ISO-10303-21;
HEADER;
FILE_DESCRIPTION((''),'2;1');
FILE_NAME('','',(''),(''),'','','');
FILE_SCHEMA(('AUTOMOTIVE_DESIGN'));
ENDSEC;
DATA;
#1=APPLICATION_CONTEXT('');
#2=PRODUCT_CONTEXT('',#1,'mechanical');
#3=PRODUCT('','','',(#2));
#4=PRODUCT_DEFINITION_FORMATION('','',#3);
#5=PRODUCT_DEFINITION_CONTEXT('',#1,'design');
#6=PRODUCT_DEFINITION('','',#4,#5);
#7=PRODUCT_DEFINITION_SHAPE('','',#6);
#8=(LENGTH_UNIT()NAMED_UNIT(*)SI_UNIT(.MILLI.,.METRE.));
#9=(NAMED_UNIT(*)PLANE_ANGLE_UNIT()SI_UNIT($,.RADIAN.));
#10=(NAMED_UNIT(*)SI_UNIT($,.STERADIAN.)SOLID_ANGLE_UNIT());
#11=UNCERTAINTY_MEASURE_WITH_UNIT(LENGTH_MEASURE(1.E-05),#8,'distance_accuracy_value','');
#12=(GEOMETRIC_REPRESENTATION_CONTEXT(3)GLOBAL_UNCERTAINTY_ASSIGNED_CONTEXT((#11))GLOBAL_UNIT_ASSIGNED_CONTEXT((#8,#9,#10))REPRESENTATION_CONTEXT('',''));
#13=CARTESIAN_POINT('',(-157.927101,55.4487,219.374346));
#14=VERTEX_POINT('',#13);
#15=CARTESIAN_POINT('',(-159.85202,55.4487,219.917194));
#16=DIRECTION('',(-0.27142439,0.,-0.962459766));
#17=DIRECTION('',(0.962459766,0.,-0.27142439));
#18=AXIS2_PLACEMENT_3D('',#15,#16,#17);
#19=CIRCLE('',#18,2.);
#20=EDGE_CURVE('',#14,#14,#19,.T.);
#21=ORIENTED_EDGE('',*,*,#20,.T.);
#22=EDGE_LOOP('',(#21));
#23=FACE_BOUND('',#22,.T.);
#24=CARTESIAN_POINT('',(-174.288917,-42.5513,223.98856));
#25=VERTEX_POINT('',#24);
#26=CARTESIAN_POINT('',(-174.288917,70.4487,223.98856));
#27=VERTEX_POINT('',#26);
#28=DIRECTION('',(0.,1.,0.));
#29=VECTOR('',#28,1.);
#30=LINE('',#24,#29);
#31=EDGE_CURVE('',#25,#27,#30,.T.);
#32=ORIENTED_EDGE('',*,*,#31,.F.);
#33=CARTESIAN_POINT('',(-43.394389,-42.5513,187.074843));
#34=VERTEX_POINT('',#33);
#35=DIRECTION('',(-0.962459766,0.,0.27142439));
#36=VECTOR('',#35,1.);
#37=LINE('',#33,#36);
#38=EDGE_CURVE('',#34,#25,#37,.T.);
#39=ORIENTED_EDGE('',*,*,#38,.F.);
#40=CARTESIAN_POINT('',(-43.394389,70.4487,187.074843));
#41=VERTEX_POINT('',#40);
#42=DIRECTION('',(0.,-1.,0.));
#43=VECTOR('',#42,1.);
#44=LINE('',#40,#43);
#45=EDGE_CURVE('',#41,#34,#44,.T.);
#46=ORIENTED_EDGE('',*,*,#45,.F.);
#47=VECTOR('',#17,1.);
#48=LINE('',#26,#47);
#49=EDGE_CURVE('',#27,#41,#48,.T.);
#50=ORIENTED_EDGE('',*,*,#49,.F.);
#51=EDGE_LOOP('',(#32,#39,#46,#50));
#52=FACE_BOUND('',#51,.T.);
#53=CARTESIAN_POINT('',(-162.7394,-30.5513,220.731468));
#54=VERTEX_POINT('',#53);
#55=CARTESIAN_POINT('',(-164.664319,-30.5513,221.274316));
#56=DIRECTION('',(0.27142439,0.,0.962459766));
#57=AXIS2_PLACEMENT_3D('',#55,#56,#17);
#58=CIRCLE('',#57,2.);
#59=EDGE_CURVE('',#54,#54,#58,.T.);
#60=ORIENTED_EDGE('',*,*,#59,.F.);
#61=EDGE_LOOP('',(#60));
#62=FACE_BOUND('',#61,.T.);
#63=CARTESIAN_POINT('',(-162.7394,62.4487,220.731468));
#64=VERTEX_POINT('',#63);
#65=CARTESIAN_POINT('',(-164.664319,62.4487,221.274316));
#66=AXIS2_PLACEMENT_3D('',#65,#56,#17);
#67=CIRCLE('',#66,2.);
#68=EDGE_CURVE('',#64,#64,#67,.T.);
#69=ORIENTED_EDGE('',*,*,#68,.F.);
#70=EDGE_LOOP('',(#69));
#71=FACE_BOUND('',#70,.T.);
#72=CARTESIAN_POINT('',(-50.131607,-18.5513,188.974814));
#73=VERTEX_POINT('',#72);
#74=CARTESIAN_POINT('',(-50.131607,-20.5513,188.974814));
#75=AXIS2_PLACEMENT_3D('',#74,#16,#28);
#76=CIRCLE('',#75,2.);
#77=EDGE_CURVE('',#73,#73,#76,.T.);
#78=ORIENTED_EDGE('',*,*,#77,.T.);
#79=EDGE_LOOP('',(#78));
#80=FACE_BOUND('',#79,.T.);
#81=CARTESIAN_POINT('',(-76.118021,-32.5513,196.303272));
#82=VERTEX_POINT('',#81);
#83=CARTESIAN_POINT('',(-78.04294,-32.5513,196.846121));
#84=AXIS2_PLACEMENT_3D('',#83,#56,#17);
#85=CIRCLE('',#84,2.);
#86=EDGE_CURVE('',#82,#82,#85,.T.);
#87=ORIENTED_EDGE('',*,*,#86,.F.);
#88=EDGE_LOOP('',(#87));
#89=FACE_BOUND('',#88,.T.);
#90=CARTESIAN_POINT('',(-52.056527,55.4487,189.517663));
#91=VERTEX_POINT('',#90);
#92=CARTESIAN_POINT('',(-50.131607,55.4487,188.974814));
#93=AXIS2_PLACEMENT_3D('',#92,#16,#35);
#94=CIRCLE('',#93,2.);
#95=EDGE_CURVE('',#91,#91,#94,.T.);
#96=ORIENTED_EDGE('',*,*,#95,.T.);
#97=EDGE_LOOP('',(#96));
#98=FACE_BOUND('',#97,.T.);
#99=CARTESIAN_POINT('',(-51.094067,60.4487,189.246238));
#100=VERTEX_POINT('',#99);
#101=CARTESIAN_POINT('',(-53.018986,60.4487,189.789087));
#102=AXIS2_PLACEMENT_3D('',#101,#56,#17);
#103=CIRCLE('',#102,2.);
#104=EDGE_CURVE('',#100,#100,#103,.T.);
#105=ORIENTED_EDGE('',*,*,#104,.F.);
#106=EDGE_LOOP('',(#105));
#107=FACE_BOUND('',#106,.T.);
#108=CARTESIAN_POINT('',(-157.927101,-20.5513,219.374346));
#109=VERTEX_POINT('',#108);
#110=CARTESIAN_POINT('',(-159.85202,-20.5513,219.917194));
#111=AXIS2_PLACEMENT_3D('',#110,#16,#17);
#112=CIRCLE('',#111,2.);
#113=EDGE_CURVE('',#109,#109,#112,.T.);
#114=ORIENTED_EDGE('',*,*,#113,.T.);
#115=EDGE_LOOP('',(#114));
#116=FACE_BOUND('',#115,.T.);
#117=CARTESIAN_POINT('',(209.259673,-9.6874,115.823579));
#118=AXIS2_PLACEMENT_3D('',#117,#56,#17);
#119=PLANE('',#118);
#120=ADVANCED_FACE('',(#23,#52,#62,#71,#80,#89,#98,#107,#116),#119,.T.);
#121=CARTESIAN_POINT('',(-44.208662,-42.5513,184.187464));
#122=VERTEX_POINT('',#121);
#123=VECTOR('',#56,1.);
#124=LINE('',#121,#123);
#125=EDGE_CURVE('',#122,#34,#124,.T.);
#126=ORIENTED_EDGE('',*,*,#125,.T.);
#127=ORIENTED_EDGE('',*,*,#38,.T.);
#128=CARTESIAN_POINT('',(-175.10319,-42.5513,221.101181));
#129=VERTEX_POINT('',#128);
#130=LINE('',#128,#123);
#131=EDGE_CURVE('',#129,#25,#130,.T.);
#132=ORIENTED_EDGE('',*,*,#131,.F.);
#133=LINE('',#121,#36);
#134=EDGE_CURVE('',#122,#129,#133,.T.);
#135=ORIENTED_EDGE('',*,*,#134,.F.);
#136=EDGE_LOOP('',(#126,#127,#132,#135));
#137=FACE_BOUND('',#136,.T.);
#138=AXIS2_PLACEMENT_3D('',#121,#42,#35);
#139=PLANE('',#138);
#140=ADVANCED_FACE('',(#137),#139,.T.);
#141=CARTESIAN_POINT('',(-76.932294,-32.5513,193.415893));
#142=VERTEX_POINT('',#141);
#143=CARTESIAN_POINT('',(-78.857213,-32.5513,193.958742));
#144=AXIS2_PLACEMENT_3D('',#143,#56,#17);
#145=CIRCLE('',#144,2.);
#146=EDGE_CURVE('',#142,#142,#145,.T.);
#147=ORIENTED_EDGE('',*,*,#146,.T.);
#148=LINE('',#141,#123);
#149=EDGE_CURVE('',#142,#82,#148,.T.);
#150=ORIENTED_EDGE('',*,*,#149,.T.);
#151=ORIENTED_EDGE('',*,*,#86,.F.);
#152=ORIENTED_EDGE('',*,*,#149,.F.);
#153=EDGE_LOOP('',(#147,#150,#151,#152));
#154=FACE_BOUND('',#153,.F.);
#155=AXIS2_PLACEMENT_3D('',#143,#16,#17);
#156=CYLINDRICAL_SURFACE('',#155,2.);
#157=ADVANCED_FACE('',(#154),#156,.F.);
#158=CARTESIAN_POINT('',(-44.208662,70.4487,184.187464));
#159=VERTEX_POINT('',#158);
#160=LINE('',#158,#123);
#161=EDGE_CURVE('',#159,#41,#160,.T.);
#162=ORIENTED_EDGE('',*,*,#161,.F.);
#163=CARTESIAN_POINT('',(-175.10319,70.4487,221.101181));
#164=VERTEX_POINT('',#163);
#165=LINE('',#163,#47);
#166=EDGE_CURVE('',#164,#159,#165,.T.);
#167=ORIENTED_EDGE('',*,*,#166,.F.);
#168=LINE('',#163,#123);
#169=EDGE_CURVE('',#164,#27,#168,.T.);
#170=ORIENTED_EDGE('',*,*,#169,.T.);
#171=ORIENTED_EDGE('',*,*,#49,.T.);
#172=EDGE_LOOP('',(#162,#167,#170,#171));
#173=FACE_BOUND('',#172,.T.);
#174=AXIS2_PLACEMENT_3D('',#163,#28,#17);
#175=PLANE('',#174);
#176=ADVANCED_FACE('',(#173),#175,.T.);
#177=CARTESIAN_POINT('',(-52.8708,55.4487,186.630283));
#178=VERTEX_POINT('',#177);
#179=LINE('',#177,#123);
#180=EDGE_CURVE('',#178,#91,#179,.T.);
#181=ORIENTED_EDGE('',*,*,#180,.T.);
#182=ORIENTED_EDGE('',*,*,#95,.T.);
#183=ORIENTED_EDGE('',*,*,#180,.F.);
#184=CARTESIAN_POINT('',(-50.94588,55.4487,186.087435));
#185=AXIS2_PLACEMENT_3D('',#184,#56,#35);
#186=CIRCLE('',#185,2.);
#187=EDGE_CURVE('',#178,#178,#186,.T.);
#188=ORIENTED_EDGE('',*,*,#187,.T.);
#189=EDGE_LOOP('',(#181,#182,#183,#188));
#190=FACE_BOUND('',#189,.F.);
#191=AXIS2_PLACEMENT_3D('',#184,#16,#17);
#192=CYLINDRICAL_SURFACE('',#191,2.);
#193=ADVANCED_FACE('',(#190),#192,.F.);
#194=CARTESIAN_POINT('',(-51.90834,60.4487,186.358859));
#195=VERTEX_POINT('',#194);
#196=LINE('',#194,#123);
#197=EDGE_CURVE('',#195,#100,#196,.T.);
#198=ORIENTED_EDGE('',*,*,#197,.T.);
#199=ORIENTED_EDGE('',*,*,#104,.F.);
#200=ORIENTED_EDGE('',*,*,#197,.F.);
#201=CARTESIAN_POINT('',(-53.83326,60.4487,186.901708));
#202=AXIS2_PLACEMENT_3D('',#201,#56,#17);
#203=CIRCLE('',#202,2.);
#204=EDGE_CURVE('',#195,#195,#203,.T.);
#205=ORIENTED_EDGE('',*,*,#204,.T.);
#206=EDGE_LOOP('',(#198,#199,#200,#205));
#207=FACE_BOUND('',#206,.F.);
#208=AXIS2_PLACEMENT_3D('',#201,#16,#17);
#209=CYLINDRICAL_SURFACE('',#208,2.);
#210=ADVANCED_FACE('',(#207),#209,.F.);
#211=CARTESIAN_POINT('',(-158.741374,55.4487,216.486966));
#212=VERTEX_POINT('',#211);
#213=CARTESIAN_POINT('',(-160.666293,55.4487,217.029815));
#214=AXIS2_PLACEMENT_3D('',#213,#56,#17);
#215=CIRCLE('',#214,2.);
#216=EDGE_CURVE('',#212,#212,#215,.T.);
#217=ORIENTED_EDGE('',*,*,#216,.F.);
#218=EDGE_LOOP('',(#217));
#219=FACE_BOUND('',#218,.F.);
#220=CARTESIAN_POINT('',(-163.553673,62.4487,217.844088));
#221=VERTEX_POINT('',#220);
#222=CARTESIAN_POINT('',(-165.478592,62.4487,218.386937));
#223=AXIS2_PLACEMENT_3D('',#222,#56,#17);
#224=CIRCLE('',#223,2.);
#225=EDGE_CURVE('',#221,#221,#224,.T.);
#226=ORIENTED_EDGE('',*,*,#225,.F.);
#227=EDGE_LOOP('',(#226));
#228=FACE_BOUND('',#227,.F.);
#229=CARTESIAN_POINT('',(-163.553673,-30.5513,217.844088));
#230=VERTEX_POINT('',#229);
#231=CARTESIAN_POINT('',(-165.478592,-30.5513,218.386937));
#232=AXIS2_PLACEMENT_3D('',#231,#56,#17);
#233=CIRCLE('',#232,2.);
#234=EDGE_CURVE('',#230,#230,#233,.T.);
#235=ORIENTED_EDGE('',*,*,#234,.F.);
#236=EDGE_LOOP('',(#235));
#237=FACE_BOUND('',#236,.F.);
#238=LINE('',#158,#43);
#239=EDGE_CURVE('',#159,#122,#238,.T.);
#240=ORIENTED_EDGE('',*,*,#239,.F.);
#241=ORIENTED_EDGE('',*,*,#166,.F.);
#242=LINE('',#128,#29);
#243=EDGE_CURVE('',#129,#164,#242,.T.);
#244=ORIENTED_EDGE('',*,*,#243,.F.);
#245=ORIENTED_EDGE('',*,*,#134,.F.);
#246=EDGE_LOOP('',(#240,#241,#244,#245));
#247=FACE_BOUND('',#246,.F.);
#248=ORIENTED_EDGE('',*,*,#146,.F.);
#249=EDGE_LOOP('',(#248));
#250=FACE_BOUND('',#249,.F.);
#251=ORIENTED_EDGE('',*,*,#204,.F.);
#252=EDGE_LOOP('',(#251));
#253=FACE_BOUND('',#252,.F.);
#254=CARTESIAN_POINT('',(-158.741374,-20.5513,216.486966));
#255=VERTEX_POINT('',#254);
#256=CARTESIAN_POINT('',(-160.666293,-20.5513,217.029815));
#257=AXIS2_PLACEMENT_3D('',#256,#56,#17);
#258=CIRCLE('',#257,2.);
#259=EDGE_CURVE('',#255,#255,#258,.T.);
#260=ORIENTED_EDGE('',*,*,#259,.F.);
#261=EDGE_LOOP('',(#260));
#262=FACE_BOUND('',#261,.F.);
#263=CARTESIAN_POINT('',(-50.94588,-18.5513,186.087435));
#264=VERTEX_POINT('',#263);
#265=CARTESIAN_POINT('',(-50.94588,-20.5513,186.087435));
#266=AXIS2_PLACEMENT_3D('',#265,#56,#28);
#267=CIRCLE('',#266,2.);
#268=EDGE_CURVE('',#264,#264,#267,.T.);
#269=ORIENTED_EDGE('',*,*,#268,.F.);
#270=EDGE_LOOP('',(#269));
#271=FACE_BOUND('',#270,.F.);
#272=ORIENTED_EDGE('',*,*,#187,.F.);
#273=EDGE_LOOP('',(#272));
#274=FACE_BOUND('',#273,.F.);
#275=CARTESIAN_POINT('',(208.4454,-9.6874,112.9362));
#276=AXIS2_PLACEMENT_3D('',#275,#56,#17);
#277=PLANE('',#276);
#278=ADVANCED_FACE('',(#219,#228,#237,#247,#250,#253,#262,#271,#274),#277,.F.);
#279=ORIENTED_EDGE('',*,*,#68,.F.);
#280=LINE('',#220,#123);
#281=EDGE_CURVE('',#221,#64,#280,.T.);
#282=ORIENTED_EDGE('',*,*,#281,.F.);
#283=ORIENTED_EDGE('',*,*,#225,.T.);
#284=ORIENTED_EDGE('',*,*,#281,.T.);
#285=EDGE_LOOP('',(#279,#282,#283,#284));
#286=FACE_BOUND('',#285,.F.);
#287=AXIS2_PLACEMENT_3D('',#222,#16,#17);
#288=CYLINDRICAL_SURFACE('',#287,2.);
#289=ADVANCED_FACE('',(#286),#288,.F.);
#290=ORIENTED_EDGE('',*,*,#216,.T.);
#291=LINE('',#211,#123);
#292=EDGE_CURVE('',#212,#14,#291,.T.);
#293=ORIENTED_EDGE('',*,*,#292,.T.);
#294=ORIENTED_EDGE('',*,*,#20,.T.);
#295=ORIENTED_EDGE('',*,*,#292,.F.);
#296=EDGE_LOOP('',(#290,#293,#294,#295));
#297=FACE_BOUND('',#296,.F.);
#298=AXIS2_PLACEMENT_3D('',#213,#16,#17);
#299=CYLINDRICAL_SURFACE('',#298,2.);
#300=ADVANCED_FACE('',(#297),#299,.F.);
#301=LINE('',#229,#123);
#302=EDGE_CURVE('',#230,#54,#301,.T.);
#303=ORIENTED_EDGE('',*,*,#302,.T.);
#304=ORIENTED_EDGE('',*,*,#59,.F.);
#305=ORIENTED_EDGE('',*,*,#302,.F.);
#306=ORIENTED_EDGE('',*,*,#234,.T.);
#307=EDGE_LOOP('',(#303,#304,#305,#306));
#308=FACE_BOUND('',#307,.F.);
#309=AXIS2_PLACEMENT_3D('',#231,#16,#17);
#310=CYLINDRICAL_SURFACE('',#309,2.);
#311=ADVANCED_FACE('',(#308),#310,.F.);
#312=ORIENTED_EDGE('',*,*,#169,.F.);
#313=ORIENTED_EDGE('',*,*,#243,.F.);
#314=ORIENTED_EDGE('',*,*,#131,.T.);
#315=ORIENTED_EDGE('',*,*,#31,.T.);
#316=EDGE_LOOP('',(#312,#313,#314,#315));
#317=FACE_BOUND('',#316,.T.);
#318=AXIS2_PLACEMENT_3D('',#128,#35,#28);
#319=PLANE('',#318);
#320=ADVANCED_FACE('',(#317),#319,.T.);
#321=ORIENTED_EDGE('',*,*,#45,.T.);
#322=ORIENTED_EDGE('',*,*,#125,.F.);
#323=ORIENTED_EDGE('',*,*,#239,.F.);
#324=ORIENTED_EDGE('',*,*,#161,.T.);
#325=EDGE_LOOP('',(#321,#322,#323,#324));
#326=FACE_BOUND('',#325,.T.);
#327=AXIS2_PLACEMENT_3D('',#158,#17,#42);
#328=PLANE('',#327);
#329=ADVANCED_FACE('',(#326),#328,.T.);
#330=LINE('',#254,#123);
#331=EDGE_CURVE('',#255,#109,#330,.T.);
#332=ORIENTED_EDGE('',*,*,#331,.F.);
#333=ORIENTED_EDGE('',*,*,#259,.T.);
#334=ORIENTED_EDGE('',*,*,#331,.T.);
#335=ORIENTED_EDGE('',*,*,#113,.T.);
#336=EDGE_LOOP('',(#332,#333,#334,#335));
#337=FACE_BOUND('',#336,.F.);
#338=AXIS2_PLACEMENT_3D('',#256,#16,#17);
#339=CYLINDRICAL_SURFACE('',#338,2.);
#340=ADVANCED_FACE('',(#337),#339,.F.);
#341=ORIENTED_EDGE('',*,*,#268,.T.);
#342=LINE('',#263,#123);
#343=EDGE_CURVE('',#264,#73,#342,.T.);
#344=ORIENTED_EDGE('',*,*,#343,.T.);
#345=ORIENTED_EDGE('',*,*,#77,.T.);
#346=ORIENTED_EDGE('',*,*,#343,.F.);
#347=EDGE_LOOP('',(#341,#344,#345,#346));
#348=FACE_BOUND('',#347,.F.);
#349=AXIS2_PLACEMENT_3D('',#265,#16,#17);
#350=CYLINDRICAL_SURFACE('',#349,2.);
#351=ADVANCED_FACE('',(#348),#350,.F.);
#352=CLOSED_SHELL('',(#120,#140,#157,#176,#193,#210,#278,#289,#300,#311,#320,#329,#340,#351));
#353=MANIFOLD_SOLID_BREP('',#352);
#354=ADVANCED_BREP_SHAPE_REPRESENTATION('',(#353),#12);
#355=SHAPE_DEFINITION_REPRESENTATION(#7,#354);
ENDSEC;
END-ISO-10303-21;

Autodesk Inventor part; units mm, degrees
ref_plane "YZ Plane" through (0, 0, 0) normal (1, 0, 0) x (0, 1, 0)
ref_plane "XZ Plane" through (0, 0, 0) normal (0, 1, 0) x (-1, 0, 0)
ref_plane "XY Plane" through (0, 0, 0) normal (0, 0, 1) x (1, 0, 0)
ref_plane "Work Plane1" through (208.4454, -9.6874, 112.9362) normal (0.2714244, 0, 0.9624598) x (0.9624598, 0, -0.2714244)
sketch "Sketch1" plane through (208.4454, -9.6874, 112.9362) normal (0.2714244, 0, 0.9624598) x (0.9624598, 0, -0.2714244)
  line L0 (-398.5087, 80.1361) -> (-262.5087, 80.1361)
  line L1 (-262.5087, 80.1361) -> (-262.5087, -32.8639)
  line L2 (-262.5087, -32.8639) -> (-398.5087, -32.8639)
  line L3 (-398.5087, -32.8639) -> (-398.5087, 80.1361)
  circle A0 centre (-388.5087, 72.1361) radius 2
  circle A1 centre (-272.5087, 70.1361) radius 2
  circle A2 centre (-298.5087, -22.8639) radius 2
  circle A3 centre (-388.5087, -20.8639) radius 2
  line L4 (-383.5087, -10.8639) -> (-269.5087, -10.8639)
  line L5 (-269.5087, -10.8639) -> (-269.5087, 65.1361)
  line L6 (-269.5087, 65.1361) -> (-383.5087, 65.1361)
  line L7 (-383.5087, 65.1361) -> (-383.5087, -10.8639)
  circle A4 centre (-383.5087, -10.8639) radius 2
  circle A5 centre (-269.5087, -10.8639) radius 2
  circle A6 centre (-269.5087, 65.1361) radius 2
  circle A7 centre (-383.5087, 65.1361) radius 2
  point P0 (-169.9666, 9.6874)
  dimension "d0" = 136
  dimension "d1" = 113
  dimension "d2" = 4
  dimension "d3" = 4
  dimension "d4" = 4
  dimension "d5" = 4
  dimension "d6" = 116
  dimension "d7" = 93
  dimension "d8" = 93
  dimension "d9" = 90
  dimension "d10" = 10
  dimension "d11" = 10
  dimension "d12" = 0
  dimension "d13" = 114
  dimension "d14" = 76
  dimension "d15" = 15
  dimension "d16" = 15
  dimension "d17" = 4
  dimension "d18" = 4
  dimension "d19" = 4
  dimension "d20" = 4
extrude "Extrusion1" add sketch "Sketch1" along normal blind 3 contours L0 L1 L2 L3 | L7 A4 L4 | A4 L7 A7 L6 A6 L5 A5 L4 | A5 L5 L4 | L7 L6 A7 | A6 L6 L5 picked at (-383.0711, -9.6133) picked at (-269.9463, -9.6133) picked at (-383.0711, 63.8855) picked at (-269.9463, 63.8855)
extrude "Extrusion2" cut sketch "Sketch1" along normal through all contours L7 A4 L4 | L4 A4 L7 | A5 L5 L4 | L4 L5 A5 | A7 L6 L7 | L7 L6 A7 | A6 L6 L5 | L5 L6 A6
equation "\"d3\" = d2"
equation "\"d4\" = d2"
equation "\"d5\" = d4"
equation "\"d17\" = d4"
equation "\"d18\" = d4"
equation "\"d19\" = d17"
equation "\"d20\" = d18"
properties part number "SpartanLap"
